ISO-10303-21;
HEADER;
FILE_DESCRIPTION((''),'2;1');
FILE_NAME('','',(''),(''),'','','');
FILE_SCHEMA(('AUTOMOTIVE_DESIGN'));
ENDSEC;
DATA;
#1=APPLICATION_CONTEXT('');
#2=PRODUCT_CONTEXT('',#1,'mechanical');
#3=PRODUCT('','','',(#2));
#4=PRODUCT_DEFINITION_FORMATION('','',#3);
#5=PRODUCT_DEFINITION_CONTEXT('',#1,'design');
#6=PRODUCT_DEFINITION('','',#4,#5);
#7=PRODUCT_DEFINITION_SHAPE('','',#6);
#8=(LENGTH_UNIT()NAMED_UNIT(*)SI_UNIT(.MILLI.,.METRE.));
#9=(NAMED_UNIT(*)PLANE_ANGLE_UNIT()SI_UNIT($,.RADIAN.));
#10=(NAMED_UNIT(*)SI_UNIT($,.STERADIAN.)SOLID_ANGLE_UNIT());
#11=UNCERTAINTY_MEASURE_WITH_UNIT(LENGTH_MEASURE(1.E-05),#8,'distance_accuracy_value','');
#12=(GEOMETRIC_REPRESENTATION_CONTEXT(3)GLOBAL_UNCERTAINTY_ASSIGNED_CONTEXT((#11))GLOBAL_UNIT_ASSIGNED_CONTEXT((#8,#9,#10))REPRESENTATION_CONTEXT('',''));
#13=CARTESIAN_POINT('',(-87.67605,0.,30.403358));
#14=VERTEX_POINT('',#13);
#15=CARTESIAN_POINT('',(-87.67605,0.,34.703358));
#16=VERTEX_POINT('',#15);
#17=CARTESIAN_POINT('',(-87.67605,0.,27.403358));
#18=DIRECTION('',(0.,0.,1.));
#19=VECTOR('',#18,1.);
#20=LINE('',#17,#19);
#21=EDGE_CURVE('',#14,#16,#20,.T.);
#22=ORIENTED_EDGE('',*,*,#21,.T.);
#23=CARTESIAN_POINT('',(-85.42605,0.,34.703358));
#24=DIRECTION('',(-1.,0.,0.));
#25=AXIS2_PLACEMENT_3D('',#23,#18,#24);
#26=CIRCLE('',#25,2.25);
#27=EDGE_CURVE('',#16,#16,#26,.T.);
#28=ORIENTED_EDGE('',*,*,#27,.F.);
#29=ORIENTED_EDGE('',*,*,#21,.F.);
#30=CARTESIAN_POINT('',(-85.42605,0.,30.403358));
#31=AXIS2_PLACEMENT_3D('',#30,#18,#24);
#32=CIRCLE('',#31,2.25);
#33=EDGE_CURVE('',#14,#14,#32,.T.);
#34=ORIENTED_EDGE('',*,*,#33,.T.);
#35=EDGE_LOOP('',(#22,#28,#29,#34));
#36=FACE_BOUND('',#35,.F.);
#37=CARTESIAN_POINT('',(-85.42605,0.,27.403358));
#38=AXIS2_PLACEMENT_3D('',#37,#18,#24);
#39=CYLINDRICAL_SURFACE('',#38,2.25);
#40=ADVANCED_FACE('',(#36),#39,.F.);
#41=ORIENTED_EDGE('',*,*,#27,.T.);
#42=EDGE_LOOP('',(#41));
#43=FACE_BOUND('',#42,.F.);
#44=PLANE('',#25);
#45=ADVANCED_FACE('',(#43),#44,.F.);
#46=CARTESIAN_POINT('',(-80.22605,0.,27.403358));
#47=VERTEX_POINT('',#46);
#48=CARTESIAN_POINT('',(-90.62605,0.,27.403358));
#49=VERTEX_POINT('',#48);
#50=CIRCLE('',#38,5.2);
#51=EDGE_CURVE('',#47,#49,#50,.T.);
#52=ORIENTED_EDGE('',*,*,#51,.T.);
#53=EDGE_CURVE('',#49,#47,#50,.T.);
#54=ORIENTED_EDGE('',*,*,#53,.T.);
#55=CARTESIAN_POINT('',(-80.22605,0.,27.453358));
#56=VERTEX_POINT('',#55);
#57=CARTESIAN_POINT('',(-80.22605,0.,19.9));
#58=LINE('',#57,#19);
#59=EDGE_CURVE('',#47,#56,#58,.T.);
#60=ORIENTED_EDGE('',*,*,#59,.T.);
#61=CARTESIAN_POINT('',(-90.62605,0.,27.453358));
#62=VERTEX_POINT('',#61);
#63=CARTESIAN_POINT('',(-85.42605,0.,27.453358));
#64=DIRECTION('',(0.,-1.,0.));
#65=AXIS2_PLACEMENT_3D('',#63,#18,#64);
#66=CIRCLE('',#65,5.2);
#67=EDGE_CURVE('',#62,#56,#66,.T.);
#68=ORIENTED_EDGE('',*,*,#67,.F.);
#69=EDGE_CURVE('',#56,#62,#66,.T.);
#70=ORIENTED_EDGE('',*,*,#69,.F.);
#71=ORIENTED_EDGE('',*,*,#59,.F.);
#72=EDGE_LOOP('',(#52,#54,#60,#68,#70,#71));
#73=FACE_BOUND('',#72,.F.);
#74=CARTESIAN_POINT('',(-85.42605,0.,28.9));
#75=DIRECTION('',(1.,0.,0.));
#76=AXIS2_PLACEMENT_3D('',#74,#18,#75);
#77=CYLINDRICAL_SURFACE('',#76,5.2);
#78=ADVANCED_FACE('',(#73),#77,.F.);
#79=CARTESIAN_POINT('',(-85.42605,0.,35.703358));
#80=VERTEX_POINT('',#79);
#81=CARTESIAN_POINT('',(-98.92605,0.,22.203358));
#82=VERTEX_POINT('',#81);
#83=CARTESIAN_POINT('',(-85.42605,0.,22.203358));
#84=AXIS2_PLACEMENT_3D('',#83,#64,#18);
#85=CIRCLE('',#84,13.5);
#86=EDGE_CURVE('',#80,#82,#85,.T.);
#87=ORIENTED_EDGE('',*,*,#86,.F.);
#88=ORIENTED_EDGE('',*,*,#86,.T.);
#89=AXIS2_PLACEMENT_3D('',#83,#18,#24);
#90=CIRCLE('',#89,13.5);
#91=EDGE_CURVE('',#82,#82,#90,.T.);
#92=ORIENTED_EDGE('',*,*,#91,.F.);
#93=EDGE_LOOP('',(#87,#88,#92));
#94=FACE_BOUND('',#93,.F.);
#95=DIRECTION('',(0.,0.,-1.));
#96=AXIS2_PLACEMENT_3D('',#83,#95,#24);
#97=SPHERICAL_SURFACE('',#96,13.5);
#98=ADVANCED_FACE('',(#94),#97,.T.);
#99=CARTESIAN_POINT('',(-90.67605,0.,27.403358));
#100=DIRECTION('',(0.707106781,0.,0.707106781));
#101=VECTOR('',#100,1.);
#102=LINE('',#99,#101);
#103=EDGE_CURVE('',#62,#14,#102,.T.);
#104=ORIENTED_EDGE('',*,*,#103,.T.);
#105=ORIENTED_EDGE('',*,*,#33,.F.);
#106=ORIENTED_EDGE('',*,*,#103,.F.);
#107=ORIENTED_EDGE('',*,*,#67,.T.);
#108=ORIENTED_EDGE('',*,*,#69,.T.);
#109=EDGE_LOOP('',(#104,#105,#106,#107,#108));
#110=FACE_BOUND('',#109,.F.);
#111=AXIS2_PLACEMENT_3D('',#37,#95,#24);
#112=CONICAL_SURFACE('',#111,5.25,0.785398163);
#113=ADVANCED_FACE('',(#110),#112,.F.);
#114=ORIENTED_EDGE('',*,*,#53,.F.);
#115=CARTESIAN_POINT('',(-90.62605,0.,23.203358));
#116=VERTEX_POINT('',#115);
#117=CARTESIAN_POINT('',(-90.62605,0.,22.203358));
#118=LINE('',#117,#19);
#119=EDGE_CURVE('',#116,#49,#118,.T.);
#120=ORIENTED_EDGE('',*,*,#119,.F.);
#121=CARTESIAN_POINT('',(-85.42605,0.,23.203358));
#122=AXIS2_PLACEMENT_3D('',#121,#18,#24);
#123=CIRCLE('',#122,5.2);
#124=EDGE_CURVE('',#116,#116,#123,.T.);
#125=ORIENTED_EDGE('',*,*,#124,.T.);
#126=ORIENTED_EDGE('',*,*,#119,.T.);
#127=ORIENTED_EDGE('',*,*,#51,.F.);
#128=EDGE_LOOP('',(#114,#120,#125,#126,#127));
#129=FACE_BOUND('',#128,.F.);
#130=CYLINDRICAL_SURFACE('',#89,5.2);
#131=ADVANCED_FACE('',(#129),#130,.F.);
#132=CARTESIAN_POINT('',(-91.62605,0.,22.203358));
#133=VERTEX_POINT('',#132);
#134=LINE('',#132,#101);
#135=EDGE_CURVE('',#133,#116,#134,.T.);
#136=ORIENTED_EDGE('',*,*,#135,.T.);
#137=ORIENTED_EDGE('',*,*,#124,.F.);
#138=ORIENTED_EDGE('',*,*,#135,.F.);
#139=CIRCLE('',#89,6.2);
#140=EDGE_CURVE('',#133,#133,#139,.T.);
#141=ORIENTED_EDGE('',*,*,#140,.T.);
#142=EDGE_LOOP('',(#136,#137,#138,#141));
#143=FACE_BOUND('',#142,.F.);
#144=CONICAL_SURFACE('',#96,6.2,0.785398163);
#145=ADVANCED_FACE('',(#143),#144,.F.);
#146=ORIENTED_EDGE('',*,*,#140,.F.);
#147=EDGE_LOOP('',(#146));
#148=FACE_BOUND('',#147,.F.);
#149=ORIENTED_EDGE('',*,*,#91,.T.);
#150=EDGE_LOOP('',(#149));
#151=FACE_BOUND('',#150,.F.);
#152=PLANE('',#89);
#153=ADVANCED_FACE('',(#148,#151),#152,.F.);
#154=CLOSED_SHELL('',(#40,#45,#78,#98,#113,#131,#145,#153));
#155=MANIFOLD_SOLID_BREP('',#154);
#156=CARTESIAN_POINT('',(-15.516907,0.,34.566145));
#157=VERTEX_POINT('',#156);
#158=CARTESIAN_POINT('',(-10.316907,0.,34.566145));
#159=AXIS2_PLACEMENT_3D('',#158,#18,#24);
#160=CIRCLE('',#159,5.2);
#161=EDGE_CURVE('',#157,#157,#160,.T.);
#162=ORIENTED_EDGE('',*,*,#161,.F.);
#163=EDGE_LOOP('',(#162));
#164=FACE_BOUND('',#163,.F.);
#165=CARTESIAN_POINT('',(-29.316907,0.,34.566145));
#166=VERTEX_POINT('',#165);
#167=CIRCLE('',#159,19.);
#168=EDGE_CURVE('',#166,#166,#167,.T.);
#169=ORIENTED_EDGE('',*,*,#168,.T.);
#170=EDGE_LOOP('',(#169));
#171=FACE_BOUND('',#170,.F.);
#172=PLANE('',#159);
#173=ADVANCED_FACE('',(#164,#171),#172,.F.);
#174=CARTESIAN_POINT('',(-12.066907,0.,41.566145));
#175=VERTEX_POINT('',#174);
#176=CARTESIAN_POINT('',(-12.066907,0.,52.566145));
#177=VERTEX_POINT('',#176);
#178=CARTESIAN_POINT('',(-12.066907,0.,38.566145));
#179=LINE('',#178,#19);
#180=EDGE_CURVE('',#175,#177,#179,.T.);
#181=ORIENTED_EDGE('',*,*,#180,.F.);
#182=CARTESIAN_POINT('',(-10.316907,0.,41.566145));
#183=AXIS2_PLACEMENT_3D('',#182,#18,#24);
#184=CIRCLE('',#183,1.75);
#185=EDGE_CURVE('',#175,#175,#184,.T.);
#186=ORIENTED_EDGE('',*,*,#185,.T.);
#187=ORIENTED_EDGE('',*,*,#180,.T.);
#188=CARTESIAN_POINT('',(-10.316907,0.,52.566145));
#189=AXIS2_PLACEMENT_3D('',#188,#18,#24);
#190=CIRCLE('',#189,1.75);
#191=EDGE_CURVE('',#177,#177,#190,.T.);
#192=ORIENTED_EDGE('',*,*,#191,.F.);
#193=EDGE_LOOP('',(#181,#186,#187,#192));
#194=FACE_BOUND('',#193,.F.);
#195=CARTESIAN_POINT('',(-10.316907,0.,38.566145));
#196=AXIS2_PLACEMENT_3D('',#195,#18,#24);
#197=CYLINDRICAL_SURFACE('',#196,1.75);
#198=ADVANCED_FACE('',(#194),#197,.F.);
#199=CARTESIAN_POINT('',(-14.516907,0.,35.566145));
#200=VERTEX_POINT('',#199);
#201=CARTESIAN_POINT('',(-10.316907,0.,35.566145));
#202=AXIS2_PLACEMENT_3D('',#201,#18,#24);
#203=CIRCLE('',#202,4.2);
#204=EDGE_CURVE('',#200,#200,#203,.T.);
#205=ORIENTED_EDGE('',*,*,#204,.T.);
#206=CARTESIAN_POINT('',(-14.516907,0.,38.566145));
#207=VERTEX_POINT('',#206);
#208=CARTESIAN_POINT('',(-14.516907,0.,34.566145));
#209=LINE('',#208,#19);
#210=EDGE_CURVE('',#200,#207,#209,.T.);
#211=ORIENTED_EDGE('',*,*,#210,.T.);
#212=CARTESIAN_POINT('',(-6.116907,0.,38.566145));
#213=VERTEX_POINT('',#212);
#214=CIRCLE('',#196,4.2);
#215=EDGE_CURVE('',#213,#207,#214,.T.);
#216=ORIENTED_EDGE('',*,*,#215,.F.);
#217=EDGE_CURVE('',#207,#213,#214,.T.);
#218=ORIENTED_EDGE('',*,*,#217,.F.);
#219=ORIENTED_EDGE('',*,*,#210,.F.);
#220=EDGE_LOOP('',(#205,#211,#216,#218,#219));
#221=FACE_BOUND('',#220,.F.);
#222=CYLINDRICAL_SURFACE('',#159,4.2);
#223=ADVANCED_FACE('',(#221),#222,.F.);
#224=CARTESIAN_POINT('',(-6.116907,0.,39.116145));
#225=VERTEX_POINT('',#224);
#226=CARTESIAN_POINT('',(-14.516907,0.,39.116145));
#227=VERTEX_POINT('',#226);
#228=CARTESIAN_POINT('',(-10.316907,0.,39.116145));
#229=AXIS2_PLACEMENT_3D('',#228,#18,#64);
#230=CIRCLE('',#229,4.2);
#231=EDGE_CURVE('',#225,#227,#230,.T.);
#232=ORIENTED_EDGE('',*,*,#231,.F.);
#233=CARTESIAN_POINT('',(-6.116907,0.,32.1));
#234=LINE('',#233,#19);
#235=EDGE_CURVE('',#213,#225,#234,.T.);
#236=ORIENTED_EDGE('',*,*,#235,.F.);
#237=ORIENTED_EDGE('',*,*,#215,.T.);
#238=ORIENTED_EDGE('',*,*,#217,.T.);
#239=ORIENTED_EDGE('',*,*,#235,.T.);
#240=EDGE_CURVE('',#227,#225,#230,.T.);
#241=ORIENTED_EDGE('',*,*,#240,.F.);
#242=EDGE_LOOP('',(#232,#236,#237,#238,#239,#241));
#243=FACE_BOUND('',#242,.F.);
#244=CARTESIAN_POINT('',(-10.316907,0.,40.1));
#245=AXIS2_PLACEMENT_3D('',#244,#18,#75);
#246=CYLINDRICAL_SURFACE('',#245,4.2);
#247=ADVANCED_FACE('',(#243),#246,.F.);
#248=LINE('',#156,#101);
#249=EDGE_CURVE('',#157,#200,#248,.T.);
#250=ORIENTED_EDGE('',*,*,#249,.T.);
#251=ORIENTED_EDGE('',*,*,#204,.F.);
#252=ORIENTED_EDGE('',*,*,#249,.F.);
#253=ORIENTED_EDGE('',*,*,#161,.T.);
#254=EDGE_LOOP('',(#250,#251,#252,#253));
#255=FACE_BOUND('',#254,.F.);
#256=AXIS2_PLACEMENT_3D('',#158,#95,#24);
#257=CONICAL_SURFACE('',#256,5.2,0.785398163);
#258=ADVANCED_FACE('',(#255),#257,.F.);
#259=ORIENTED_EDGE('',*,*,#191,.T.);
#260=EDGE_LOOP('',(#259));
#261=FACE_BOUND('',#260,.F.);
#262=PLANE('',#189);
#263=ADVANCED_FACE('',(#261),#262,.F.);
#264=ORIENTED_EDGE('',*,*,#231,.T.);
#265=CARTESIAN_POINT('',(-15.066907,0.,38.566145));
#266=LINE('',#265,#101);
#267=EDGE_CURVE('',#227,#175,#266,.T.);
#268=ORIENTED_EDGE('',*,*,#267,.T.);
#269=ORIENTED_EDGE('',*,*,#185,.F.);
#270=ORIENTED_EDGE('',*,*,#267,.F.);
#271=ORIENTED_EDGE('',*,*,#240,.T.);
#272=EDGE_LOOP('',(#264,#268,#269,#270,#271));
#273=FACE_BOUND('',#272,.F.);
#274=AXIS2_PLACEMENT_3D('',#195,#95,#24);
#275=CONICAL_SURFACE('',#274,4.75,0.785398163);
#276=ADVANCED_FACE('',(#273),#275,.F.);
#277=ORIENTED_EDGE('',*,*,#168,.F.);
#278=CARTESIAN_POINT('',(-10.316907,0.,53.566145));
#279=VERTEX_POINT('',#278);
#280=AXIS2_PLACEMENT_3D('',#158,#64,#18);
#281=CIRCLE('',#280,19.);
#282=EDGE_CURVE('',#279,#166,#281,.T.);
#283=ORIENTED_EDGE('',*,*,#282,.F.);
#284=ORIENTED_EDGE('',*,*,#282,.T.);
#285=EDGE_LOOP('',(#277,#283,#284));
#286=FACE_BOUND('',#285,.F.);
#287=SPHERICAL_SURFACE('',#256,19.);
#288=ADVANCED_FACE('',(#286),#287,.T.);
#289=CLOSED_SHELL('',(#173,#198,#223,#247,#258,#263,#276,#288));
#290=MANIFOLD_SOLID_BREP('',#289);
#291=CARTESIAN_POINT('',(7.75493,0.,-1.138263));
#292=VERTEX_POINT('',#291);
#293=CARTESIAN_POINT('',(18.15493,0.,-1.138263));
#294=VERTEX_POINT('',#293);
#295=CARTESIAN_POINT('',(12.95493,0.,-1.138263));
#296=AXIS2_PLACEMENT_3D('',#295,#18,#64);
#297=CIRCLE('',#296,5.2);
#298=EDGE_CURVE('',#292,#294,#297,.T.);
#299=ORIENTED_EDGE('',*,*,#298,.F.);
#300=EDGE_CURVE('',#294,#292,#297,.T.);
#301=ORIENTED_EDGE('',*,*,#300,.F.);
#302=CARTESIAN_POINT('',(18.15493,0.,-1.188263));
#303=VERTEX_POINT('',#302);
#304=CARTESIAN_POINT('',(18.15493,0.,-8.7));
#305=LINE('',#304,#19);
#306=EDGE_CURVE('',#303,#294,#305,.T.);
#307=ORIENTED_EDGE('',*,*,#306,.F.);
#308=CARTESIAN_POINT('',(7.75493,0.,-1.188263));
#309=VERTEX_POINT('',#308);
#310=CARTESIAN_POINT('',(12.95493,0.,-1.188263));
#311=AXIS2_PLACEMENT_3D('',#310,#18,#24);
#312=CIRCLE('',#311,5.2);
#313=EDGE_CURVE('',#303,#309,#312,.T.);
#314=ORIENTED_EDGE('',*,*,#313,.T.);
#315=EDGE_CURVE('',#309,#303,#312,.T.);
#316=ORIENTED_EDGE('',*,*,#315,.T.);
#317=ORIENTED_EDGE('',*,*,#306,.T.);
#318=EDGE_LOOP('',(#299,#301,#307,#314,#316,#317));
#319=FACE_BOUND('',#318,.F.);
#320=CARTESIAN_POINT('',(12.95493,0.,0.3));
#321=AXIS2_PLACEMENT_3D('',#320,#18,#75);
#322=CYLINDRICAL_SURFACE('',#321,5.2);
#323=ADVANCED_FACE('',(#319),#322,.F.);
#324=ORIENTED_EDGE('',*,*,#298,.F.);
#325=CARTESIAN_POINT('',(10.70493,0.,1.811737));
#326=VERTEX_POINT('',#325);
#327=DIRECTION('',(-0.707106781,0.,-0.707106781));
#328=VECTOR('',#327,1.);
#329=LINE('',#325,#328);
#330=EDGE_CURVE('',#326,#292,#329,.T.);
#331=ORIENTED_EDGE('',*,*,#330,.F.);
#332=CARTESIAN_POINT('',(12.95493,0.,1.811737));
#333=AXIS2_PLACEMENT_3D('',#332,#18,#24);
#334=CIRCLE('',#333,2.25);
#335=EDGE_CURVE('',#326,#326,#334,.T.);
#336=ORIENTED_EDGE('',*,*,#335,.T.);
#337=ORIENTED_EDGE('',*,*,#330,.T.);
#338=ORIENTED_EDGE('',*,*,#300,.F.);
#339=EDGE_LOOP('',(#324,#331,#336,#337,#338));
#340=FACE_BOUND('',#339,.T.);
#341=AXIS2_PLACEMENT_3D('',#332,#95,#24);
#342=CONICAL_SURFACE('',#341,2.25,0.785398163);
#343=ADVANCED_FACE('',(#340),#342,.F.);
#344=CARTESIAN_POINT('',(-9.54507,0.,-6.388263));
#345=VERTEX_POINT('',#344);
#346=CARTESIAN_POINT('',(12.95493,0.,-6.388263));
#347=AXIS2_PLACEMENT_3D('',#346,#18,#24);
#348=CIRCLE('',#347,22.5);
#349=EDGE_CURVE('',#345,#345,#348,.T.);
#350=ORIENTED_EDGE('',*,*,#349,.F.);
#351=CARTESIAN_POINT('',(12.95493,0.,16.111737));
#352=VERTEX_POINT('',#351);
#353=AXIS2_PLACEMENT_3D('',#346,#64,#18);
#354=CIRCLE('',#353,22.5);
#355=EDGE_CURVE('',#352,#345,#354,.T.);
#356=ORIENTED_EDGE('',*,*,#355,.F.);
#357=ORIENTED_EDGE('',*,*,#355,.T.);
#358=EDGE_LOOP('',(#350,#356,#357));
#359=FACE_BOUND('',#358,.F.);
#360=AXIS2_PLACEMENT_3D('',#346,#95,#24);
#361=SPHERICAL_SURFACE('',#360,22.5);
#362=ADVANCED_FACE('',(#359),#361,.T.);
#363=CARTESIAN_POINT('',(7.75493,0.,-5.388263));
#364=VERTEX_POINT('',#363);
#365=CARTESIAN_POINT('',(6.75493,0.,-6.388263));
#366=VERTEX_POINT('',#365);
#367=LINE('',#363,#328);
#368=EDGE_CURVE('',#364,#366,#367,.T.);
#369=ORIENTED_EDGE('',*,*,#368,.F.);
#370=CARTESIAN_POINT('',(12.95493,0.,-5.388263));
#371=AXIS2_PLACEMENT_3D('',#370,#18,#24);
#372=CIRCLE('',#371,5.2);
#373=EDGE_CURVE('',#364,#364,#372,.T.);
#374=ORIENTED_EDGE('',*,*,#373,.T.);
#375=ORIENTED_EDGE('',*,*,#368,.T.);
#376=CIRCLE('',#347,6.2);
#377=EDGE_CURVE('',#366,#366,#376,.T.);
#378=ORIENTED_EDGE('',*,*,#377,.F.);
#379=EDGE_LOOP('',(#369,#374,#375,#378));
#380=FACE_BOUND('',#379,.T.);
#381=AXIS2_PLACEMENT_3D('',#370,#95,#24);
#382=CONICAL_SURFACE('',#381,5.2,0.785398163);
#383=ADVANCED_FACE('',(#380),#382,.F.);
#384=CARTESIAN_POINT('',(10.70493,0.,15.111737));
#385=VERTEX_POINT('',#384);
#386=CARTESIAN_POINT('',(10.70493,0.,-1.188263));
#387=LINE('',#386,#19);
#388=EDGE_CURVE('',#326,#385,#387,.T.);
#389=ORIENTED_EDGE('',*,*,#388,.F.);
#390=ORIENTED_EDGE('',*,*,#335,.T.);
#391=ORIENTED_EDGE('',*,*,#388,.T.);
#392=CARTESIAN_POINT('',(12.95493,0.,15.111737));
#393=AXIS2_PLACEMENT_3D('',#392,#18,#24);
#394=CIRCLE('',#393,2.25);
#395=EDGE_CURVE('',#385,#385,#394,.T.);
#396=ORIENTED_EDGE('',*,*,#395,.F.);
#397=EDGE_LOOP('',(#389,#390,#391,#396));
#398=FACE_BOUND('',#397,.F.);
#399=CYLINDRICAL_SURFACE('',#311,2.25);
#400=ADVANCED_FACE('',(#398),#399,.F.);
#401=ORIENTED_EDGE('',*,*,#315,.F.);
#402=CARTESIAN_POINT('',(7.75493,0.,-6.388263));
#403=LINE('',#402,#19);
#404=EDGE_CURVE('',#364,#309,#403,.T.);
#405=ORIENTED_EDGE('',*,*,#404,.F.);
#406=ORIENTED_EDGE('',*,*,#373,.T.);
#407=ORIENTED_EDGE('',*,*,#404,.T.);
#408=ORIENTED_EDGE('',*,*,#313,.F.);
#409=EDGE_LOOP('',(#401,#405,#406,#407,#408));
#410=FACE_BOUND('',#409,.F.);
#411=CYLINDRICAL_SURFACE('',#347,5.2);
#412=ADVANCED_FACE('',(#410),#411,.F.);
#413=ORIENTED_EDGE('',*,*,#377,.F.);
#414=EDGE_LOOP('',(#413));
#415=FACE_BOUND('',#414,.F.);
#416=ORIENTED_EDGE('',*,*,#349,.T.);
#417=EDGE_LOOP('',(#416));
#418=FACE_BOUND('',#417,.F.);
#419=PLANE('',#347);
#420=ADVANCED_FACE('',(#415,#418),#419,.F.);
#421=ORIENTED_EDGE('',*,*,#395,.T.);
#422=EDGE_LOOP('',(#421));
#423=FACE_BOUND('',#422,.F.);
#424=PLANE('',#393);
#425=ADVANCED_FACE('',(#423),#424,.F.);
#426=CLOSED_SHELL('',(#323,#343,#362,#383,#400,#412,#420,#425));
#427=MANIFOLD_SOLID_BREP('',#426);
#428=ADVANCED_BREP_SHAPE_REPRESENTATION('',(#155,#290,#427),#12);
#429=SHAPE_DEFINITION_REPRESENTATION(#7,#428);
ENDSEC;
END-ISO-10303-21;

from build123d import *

# Parameters (mm, degrees)
F6_S5_R       = 5.2
F6_T6_DEPTH   = 9
F6_2_S5_R     = 5.2
F6_2_T6_DEPTH = 9
F6_3_S5_R     = 4.2
F6_3_T6_DEPTH = 8


# Not quite as in the source:
# - a fillet or chamfer that OpenCascade refuses, or shapes differently, is made with other operations: its cross-section is extruded or revolved along the edge and cut away or added


with BuildPart() as f1:
    # F0 (on Front) → F1 (revolve)
    with BuildSketch(Plane.XZ):
        with BuildLine():
            Line((-85.4260504544, 34.7033580244), (-85.4260504544, 35.7033580244))
            ThreePointArc((-85.4260504544, 35.7033580244), (-94.9719920004, 31.7492995704), (-98.9260504544, 22.2033580244))
            Line((-98.9260504544, 22.2033580244), (-90.6260504544, 22.2033580244))
            Line((-90.6260504544, 22.2033580244), (-90.6260504544, 27.4033580244))
            Line((-90.6260504544, 27.4033580244), (-87.6760504544, 27.4033580244))
            Line((-87.6760504544, 27.4033580244), (-87.6760504544, 34.7033580244))
            Line((-87.6760504544, 34.7033580244), (-85.4260504544, 34.7033580244))
        make_face()
    revolve(axis=Axis((-85.4260504544, 0, 28.9533580244), (0, 0, 1)))

    # F6: chamfer of 3 on 1 edges, made by hand


with BuildPart() as f3:
    # F2 (on Front) → F3 (revolve)
    with BuildSketch(Plane.XZ):
        with BuildLine():
            Line((12.9549296586, 15.1117370081), (12.9549296586, 16.1117370081))
            ThreePointArc((12.9549296586, 16.1117370081), (-2.9549729181, 9.5216395848), (-9.5450703414, -6.3882629919))
            Line((-9.5450703414, -6.3882629919), (7.7549296586, -6.3882629919))
            Line((7.7549296586, -6.3882629919), (7.7549296586, -1.1882629919))
            Line((7.7549296586, -1.1882629919), (10.7049296586, -1.1882629919))
            Line((10.7049296586, -1.1882629919), (10.7049296586, 15.1117370081))
            Line((10.7049296586, 15.1117370081), (12.9549296586, 15.1117370081))
        make_face()
    revolve(axis=Axis((12.9549296586, 0, 4.8617370081), (0, 0, 1)))

    # F6#2: chamfer of 3 on 1 edges, made by hand


with BuildPart() as f5:
    # F4 (on Front) → F5 (revolve)
    with BuildSketch(Plane.XZ):
        with BuildLine():
            Line((-10.3169069651, 52.5661451879), (-10.3169069651, 53.5661451879))
            ThreePointArc((-10.3169069651, 53.5661451879), (-23.7519358077, 48.0011740305), (-29.3169069651, 34.5661451879))
            Line((-29.3169069651, 34.5661451879), (-14.5169069651, 34.5661451879))
            Line((-14.5169069651, 34.5661451879), (-14.5169069651, 38.5661451879))
            Line((-14.5169069651, 38.5661451879), (-12.0669069651, 38.5661451879))
            Line((-12.0669069651, 38.5661451879), (-12.0669069651, 52.5661451879))
            Line((-12.0669069651, 52.5661451879), (-10.3169069651, 52.5661451879))
        make_face()
    revolve(axis=Axis((-10.3169069651, 0, 44.0661451879), (0, 0, 1)))

    # F6#3: chamfer of 3 on 1 edges, made by hand


with BuildPart() as f6_tool2:
    # F6_s3 → F6_t4 (revolve)
    with BuildSketch(Plane.XZ):
        Polygon((-90.6760504544, 27.4033580244), (-87.6760504544, 30.4033580244), (-87.6760504544, 27.4033580244), align=None)
    revolve(axis=Axis((-85.4260504544, 0, 27.4033580244), (0, 0, 1)))

    # F6_s5 → F6_t6 (intersect, symmetric)
    with BuildSketch(Plane.XY.offset(28.9)):
        with Locations((-85.4260504544, 0)):
            Circle(F6_S5_R)
    extrude(amount=F6_T6_DEPTH, both=True, mode=Mode.INTERSECT)


with BuildPart() as f1_1:
    add(f1.part)

    # F6_t1: cut F6_tool2
    add(f6_tool2.part, mode=Mode.SUBTRACT)

    # F7: chamfer of 1 on 1 edges, made by hand

    # F7_s1 → F7_t2 (revolve, cut)
    with BuildSketch(Plane.XZ):
        Polygon((-91.6260504544, 22.2033580244), (-90.6260504544, 23.2033580244), (-90.6260504544, 22.2033580244), align=None)
    revolve(axis=Axis((-85.4260504544, 0, 22.2033580244), (0, 0, 1)), mode=Mode.SUBTRACT)


with BuildPart() as f6_2_tool2:
    # F6_2_s3 → F6_2_t4 (revolve)
    with BuildSketch(Plane.XZ):
        Polygon((10.7049296586, 1.8117370081), (7.7049296586, -1.1882629919), (10.7049296586, -1.1882629919), align=None)
    revolve(axis=Axis((12.9549296586, 0, -1.1882629919), (0, 0, 1)))

    # F6_2_s5 → F6_2_t6 (intersect, symmetric)
    with BuildSketch(Plane.XY.offset(0.3)):
        with Locations((12.9549296586, 0)):
            Circle(F6_2_S5_R)
    extrude(amount=F6_2_T6_DEPTH, both=True, mode=Mode.INTERSECT)


with BuildPart() as f3_1:
    add(f3.part)

    # F6_2_t1: cut F6_2_tool2
    add(f6_2_tool2.part, mode=Mode.SUBTRACT)

    # F7#3: chamfer of 1 on 1 edges, made by hand

    # F7_3_s1 → F7_3_t2 (revolve, cut)
    with BuildSketch(Plane.XZ):
        Polygon((7.7549296586, -5.3882629919), (6.7549296586, -6.3882629919), (7.7549296586, -6.3882629919), align=None)
    revolve(axis=Axis((12.9549296586, 0, -6.3882629919), (0, 0, 1)), mode=Mode.SUBTRACT)


with BuildPart() as f6_3_tool2:
    # F6_3_s3 → F6_3_t4 (revolve)
    with BuildSketch(Plane.XZ):
        Polygon((-15.0669069651, 38.5661451879), (-12.0669069651, 41.5661451879), (-12.0669069651, 38.5661451879), align=None)
    revolve(axis=Axis((-10.3169069651, 0, 38.5661451879), (0, 0, 1)))

    # F6_3_s5 → F6_3_t6 (intersect, symmetric)
    with BuildSketch(Plane.XY.offset(40.1)):
        with Locations((-10.3169069651, 0)):
            Circle(F6_3_S5_R)
    extrude(amount=F6_3_T6_DEPTH, both=True, mode=Mode.INTERSECT)


with BuildPart() as f5_1:
    add(f5.part)

    # F6_3_t1: cut F6_3_tool2
    add(f6_3_tool2.part, mode=Mode.SUBTRACT)

    # F7#2: chamfer of 1 on 1 edges, made by hand

    # F7_2_s1 → F7_2_t2 (revolve, cut)
    with BuildSketch(Plane.XZ):
        Polygon((-15.5169069651, 34.5661451879), (-14.5169069651, 35.5661451879), (-14.5169069651, 34.5661451879), align=None)
    revolve(axis=Axis((-10.3169069651, 0, 34.5661451879), (0, 0, 1)), mode=Mode.SUBTRACT)


solid = Compound([f1_1.part, f3_1.part, f5_1.part])
